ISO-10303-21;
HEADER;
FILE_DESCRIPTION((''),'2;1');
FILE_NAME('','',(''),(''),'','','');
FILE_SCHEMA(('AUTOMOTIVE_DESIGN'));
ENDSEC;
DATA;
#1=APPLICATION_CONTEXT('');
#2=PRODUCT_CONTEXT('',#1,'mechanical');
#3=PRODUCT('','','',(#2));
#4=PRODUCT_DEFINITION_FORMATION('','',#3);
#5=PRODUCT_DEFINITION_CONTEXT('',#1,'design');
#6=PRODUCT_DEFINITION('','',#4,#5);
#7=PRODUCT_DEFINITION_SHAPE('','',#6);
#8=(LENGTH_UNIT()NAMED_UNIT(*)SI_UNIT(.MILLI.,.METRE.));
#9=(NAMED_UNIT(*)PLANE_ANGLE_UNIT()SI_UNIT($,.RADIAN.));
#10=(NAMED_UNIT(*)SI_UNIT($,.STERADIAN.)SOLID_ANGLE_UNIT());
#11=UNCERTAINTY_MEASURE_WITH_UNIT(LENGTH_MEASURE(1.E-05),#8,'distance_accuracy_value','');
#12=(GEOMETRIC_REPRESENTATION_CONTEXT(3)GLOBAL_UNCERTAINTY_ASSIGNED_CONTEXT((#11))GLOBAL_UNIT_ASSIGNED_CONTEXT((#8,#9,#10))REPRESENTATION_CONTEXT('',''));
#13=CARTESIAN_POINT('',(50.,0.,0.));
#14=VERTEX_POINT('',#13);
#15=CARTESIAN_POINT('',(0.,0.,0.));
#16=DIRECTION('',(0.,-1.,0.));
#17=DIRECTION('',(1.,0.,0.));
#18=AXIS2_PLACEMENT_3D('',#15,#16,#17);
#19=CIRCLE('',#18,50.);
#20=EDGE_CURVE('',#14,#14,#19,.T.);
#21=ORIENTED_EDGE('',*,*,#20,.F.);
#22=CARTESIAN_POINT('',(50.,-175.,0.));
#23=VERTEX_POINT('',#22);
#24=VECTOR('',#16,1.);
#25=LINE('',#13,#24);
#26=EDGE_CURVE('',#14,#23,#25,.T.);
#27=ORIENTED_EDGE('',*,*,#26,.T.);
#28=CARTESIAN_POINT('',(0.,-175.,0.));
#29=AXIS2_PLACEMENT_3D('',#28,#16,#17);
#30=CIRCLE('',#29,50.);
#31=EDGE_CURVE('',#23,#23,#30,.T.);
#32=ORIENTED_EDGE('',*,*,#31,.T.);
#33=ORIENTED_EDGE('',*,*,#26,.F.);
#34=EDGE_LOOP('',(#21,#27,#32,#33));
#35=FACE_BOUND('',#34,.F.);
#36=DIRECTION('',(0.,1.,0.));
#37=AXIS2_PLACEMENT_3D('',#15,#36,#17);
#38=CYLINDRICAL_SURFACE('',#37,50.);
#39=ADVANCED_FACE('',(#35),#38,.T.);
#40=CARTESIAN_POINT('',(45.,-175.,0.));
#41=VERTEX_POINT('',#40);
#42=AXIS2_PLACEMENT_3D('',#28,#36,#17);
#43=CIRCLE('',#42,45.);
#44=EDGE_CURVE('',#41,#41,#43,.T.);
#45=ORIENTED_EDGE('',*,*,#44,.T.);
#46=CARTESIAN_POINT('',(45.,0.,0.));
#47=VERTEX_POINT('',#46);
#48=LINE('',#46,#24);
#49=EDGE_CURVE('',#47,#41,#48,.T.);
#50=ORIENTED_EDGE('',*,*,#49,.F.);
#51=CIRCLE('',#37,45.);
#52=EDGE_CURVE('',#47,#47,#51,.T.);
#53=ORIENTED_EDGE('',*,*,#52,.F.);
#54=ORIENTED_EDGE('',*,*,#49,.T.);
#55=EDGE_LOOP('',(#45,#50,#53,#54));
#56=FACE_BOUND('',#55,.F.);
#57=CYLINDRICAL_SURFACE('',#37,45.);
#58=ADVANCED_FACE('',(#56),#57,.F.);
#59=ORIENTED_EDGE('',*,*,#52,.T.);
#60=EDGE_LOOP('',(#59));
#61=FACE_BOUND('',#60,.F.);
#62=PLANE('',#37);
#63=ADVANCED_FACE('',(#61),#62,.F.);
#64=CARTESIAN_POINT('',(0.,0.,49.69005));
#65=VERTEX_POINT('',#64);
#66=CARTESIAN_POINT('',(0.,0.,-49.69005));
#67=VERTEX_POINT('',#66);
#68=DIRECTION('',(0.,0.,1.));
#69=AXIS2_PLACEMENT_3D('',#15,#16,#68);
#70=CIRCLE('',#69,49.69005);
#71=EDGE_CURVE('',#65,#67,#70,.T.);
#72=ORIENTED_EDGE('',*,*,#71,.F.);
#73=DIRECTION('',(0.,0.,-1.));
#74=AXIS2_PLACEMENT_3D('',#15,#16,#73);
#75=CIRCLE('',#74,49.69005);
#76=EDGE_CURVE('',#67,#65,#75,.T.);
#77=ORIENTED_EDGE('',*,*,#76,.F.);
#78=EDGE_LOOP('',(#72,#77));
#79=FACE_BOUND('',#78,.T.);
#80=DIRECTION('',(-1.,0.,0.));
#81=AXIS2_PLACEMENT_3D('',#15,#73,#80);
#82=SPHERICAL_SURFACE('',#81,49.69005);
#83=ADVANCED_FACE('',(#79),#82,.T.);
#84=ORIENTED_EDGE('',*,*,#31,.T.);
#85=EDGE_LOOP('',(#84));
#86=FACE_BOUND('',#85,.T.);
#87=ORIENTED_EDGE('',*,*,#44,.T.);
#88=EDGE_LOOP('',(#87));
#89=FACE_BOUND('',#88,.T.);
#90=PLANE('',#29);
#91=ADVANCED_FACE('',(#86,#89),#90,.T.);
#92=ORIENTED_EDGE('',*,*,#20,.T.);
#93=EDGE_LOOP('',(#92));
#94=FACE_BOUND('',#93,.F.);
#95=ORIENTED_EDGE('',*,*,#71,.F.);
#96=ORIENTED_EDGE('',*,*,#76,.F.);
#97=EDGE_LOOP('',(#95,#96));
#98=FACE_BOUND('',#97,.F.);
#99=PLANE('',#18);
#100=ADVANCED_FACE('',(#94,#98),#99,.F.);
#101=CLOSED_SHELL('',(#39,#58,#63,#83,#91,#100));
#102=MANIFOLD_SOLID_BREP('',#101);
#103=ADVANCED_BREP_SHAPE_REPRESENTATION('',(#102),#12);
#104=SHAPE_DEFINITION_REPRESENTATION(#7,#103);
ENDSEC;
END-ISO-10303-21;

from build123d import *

# Parameters (mm, degrees)
F0_R     = 50
F1_DEPTH = 175
F5_D     = 90
F5_DEPTH = 175.001


with BuildPart() as f1:
    # F0 (on Front) → F1 (new body)
    with BuildSketch(Plane.XZ):
        Circle(F0_R)
    extrude(amount=F1_DEPTH)

    # F2 (on Front) → F3 (revolve)
    with BuildSketch(Plane.XZ):
        with BuildLine():
            Line((0, -49.6900500015), (0, 49.6900500015))
            ThreePointArc((0, 49.6900500015), (-49.6900500015, 0), (0, -49.6900500015))
        make_face()
    revolve(axis=Axis((0, 0, 0), (0, 0, -1)))

    # F5 (through all, one way)
    with BuildSketch(Plane(origin=(0, 0, 0), x_dir=(1, 0, 0), z_dir=(0, 1, 0))):
        with Locations((0, 0)):
            Circle(F5_D / 2)
    extrude(amount=-F5_DEPTH, mode=Mode.SUBTRACT)


solid = f1.part
